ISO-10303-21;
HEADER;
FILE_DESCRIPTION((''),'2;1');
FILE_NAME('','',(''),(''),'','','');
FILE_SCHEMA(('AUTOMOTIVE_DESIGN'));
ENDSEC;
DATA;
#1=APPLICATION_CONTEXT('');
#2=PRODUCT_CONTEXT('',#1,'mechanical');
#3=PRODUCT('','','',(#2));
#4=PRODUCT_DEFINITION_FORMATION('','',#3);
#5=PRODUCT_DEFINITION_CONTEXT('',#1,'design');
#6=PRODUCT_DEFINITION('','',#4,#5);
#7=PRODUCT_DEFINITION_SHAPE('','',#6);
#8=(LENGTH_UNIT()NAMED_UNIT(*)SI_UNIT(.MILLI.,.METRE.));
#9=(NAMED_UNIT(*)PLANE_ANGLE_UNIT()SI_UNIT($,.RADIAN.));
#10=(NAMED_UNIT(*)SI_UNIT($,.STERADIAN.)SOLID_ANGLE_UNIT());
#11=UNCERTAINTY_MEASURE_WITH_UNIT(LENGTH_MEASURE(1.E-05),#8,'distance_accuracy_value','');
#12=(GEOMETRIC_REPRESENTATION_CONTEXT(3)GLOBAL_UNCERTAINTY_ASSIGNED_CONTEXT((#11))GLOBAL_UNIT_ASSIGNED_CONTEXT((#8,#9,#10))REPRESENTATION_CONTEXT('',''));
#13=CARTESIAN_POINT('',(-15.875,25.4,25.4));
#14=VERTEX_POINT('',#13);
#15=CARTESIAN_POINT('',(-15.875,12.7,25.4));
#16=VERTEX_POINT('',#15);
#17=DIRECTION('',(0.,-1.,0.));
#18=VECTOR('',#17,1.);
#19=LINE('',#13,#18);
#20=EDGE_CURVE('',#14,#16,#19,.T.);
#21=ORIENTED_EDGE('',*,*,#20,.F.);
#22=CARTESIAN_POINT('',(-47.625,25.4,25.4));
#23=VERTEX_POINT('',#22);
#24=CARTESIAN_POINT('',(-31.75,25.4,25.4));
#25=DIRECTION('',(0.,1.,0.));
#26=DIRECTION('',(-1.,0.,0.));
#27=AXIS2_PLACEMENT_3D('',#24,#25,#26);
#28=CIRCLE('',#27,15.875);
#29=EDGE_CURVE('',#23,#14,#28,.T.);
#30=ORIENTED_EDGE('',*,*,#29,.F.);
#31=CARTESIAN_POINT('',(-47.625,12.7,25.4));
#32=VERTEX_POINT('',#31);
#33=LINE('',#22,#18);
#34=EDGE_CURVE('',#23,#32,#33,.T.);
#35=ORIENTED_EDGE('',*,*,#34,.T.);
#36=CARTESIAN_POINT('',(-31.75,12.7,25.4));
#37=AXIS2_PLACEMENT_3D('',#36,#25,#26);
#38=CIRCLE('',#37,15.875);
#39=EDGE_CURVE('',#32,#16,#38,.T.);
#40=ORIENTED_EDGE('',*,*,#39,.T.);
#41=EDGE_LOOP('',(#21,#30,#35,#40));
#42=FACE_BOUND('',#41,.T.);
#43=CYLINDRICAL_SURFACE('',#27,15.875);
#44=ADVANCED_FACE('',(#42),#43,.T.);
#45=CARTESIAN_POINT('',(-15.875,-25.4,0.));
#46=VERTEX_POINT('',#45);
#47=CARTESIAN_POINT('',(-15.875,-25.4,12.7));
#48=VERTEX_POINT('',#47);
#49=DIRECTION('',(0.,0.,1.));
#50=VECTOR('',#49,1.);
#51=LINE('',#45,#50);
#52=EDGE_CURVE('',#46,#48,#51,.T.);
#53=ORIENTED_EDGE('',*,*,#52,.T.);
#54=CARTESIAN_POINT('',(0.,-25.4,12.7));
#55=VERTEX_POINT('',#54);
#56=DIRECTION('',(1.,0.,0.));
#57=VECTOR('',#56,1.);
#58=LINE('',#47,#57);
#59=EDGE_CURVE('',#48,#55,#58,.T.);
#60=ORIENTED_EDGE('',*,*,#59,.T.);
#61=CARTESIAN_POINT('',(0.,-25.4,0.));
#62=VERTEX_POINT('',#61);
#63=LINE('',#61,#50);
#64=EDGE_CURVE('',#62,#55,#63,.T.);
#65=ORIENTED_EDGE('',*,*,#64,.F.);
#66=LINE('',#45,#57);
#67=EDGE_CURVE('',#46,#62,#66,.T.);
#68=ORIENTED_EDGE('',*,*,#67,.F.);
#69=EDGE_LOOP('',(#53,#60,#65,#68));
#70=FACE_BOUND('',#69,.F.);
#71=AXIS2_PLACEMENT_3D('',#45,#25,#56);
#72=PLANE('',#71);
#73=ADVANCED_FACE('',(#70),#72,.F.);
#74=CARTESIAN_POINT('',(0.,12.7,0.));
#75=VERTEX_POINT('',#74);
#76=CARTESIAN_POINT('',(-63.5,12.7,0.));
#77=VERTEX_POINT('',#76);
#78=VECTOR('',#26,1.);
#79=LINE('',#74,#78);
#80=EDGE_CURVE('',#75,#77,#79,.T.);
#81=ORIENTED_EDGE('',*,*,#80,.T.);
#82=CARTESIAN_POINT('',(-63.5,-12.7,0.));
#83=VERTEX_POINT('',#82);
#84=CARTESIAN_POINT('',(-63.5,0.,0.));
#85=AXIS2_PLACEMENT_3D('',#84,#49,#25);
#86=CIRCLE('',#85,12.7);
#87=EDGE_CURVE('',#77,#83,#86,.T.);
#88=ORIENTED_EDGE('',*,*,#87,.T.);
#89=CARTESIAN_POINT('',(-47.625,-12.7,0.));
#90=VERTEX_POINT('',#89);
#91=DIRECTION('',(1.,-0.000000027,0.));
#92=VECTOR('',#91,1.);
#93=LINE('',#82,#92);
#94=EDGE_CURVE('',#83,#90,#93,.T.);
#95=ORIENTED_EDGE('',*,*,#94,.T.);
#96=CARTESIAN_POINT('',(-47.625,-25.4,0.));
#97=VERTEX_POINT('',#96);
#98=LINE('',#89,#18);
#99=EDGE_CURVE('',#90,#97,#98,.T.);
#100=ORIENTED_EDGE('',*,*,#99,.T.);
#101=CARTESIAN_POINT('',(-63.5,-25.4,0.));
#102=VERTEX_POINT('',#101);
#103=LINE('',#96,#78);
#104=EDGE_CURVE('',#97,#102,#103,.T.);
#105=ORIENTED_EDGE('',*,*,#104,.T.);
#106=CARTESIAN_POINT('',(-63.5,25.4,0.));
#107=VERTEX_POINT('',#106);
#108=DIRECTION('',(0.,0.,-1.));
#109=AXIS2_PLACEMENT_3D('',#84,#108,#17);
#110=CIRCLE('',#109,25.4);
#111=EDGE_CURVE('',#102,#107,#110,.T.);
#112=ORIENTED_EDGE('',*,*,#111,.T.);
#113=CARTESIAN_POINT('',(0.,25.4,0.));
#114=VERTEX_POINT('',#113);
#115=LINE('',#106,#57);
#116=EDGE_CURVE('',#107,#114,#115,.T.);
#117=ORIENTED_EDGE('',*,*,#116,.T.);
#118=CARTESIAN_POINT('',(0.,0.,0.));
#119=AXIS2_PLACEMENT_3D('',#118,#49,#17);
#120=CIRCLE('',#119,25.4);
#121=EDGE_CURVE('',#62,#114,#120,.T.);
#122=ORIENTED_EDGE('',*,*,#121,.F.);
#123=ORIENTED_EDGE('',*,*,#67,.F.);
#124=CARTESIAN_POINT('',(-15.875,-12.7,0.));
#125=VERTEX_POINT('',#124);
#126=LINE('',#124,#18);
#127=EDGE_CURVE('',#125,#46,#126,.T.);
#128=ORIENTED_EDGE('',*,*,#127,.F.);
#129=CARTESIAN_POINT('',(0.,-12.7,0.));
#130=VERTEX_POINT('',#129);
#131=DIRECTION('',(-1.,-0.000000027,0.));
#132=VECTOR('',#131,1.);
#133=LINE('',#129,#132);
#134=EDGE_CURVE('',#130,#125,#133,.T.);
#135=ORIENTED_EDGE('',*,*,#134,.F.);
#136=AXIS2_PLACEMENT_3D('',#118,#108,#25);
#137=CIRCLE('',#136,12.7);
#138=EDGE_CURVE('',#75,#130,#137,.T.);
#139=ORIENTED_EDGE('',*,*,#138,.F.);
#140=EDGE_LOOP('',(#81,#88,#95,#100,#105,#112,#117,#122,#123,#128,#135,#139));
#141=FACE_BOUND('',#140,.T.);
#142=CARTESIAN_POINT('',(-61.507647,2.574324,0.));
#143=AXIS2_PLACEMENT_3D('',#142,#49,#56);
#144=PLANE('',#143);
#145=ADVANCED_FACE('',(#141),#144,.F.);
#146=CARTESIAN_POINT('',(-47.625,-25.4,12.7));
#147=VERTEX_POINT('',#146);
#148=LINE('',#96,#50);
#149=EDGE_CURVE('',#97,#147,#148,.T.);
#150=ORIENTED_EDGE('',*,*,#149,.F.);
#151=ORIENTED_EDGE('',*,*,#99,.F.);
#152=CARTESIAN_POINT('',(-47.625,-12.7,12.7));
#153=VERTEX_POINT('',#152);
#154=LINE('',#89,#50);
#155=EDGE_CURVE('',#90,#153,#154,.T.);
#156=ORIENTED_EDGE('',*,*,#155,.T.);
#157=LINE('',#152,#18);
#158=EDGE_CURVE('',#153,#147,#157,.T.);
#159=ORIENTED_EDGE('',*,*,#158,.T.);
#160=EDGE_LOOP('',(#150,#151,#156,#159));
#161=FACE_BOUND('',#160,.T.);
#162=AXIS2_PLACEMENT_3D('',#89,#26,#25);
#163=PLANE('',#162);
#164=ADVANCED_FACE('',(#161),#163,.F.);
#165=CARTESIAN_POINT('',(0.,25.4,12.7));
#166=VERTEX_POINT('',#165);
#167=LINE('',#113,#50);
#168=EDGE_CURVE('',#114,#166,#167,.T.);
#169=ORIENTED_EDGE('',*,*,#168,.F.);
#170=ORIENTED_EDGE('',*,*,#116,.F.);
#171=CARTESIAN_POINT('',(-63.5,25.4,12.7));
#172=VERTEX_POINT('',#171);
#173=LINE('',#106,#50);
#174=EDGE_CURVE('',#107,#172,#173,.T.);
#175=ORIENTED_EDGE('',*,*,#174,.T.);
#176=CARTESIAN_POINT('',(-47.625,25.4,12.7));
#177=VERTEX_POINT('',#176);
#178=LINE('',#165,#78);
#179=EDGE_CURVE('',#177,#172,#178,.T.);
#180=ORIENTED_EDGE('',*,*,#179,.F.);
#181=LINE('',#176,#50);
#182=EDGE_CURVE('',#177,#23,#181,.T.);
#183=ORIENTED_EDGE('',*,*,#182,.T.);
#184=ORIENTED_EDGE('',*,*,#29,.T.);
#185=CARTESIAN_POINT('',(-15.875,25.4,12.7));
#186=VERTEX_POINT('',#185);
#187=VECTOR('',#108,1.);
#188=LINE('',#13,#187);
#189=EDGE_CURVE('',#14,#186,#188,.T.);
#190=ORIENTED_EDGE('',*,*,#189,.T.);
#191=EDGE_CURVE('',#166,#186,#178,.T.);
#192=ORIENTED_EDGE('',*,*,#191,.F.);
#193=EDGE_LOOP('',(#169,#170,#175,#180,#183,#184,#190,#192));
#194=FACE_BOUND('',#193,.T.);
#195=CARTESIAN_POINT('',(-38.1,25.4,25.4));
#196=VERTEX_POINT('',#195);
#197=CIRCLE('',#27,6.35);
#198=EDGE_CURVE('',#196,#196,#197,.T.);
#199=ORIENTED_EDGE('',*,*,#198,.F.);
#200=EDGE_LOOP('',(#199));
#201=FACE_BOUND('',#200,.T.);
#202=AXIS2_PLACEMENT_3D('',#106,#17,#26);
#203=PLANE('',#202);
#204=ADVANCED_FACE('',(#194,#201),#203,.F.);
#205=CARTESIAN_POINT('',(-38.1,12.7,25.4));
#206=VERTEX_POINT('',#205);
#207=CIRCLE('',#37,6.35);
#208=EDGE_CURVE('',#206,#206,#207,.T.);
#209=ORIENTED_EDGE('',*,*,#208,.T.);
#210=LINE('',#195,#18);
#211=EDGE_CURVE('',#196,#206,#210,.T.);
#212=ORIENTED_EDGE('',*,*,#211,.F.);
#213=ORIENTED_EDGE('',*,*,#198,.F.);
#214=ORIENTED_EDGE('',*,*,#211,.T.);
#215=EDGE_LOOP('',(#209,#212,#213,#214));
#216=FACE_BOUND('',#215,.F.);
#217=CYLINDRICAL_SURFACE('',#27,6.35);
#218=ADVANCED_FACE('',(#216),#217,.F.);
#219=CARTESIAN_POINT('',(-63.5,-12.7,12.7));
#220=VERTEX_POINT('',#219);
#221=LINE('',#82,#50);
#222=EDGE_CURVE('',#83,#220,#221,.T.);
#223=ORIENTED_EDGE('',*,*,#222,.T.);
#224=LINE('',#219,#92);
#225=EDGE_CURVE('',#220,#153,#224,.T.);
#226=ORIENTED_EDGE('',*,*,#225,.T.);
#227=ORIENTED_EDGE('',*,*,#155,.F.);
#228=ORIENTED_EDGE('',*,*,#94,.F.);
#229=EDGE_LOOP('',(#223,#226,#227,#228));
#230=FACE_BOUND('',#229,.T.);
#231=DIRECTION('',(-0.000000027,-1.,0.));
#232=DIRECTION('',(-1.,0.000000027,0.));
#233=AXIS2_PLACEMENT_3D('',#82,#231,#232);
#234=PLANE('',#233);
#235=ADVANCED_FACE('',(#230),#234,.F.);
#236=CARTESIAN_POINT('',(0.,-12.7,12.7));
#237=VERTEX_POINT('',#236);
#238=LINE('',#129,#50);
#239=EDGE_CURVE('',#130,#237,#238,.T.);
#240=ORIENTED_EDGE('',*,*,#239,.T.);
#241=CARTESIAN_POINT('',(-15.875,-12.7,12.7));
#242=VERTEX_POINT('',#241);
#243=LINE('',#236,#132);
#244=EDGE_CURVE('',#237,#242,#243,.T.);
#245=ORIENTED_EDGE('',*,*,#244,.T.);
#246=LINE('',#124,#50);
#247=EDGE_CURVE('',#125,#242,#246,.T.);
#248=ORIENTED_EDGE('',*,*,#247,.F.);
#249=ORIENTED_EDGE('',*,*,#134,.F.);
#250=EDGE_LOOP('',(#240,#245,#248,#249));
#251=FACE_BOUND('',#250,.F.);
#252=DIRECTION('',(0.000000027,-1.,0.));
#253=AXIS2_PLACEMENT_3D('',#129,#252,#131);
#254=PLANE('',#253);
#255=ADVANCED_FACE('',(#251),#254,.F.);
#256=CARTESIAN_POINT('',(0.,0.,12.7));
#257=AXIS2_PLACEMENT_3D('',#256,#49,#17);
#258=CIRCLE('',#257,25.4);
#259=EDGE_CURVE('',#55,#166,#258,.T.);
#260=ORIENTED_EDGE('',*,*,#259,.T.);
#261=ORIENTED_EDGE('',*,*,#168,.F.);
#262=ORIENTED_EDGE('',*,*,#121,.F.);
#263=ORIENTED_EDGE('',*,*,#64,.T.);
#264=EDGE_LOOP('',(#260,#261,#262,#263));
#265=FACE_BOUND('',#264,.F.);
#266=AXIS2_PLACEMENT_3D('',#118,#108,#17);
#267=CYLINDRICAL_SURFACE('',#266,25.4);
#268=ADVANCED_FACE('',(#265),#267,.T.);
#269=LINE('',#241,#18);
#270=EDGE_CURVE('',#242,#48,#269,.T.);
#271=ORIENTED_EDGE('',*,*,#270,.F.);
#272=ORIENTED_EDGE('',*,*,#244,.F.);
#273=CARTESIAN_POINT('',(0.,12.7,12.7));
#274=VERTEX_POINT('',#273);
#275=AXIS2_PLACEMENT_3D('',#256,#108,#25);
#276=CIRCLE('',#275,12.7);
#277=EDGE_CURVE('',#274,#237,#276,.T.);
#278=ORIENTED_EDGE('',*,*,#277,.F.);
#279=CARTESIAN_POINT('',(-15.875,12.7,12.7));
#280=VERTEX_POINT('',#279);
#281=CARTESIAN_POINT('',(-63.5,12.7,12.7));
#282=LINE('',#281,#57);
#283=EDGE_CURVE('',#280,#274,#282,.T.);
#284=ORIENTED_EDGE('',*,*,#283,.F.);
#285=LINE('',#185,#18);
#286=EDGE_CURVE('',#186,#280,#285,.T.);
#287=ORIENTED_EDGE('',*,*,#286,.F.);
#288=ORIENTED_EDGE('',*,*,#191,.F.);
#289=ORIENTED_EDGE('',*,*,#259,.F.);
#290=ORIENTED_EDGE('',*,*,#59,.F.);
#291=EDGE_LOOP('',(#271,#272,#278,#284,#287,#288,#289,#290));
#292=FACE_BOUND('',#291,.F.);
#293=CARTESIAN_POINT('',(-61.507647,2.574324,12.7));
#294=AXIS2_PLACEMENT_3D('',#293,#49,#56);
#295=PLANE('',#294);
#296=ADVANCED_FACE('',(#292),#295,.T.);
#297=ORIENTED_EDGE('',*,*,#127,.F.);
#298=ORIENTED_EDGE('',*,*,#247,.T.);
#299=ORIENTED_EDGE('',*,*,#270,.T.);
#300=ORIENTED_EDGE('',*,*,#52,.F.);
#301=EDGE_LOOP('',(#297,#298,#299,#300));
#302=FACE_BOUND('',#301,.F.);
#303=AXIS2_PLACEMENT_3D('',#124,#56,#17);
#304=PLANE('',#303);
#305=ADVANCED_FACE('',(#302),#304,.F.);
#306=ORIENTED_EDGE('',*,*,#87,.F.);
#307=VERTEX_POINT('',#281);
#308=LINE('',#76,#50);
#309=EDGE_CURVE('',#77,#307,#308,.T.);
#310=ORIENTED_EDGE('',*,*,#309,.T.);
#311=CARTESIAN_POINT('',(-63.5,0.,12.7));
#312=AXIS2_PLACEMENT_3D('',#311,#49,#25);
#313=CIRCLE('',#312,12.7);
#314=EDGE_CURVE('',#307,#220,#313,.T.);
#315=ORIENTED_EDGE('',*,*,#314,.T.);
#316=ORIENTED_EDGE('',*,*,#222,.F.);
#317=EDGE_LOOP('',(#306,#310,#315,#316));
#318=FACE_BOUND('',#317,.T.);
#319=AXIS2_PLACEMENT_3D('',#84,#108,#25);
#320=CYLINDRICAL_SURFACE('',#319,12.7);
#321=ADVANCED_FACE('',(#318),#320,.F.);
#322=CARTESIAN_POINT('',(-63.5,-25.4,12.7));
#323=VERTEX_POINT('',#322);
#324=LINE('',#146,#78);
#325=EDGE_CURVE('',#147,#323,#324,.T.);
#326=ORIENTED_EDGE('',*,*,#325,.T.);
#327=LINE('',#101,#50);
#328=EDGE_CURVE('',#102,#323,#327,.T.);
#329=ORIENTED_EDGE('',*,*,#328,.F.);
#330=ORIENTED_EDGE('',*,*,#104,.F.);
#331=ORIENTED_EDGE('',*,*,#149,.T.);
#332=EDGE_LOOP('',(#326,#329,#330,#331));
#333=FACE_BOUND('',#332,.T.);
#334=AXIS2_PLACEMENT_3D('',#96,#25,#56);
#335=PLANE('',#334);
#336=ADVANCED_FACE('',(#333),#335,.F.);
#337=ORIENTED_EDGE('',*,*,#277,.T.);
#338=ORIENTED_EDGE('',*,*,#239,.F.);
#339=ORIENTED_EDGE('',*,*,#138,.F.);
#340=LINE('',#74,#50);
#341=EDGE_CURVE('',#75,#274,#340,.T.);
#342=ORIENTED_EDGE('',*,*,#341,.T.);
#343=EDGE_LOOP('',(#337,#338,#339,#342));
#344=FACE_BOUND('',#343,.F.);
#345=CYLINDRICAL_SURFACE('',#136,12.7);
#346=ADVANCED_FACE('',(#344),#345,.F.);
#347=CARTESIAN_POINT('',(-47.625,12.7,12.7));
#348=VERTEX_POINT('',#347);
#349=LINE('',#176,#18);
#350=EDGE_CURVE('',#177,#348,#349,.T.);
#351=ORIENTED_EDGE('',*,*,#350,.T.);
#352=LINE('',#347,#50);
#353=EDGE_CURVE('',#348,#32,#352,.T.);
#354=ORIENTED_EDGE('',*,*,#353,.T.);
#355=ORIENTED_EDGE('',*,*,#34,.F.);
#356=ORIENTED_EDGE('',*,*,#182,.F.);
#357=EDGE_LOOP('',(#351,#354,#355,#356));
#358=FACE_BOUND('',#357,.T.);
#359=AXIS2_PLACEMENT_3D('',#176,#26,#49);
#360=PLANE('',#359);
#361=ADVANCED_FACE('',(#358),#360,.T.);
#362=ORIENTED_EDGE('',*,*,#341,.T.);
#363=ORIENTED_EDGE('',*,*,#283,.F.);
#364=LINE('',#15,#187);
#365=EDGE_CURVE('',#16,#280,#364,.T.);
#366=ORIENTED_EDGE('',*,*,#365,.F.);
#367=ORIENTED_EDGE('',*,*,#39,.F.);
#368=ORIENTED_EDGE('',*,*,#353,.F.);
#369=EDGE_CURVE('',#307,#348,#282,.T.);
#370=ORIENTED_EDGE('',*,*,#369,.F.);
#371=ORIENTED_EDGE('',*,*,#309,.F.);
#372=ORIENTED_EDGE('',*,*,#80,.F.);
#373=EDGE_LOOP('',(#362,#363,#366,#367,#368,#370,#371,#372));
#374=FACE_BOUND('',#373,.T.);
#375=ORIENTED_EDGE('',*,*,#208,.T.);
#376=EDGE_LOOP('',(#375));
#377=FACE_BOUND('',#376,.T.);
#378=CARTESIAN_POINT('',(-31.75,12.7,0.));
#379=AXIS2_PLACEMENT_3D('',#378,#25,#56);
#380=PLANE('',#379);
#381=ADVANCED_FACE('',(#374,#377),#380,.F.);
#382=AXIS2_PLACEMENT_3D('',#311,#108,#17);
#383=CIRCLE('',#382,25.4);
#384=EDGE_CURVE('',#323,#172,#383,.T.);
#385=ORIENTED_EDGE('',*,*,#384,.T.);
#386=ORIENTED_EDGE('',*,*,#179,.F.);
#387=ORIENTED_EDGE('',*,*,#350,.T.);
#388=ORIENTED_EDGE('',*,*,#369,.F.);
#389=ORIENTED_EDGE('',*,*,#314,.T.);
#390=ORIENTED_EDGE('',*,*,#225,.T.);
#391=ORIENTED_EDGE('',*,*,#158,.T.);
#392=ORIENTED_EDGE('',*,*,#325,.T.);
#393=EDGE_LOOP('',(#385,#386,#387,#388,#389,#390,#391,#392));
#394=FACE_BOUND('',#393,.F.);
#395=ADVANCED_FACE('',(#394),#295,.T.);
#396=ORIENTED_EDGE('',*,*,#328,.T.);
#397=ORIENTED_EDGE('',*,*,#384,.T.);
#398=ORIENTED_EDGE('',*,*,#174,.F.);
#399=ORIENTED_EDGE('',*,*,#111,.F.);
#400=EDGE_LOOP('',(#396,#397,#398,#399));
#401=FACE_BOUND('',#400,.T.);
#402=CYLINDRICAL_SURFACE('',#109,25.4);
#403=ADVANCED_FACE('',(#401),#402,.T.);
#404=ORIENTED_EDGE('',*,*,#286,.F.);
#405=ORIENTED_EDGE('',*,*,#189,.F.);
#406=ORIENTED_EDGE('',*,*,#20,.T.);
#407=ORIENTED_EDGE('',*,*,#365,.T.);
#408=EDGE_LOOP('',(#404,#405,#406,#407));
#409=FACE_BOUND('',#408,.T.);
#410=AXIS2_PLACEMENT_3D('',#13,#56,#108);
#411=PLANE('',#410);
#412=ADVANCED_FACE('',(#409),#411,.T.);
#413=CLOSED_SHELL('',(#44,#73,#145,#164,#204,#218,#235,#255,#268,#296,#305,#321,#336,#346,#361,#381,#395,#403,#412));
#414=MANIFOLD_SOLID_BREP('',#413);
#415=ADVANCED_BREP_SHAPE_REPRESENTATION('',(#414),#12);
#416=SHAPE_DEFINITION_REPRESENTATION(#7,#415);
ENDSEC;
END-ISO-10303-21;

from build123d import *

# Parameters (mm, degrees)
F1_DEPTH = 12.7
F3_R     = 6.35
F4_DEPTH = 12.7


# Not quite as in the source:
# - a feature names something its author has since deleted; it is built from what else it names


with BuildPart() as f1:
    # F0 (on Top) → F1 (new body)
    with BuildSketch(Plane.XY):
        with BuildLine():
            Line((-15.875, -25.4), (0, -25.4))
            ThreePointArc((0, -25.4), (25.4, 0), (0, 25.4))
            Line((0, 25.4), (-31.75, 25.4))
            Line((-31.75, 25.4), (-31.75, 12.7))
            Line((-31.75, 12.7), (0, 12.7))
            ThreePointArc((0, 12.7), (12.7, 0), (0, -12.7))
            Line((0, -12.7), (-15.875, -12.70000043))
            Line((-15.875, -12.70000043), (-15.875, -25.4))
        make_face()
    extrude(amount=F1_DEPTH)

    # F2: F1 across face


with BuildPart() as f1_1:
    add(f1.part)
    add(f1.part.mirror(Plane(origin=(-31.75, 19.05, 6.35), x_dir=(0, -1, 0), z_dir=(-1, 0, 0))))

    # F3 (on face) → F4 (join, through all)
    with BuildSketch(Plane(origin=(0, 25.4, 0), x_dir=(-1, 0, 0), z_dir=(0, 1, 0))):
        with BuildLine():
            Line((47.625, 12.7), (47.625, 25.4))
            ThreePointArc((47.625, 25.4), (31.75, 41.275), (15.875, 25.4))
            Line((15.875, 25.4), (15.875, 12.7))
            Line((15.875, 12.7), (47.625, 12.7))
        make_face()
        with Locations((31.75, 25.4)):
            Circle(F3_R, mode=Mode.SUBTRACT)
    extrude(amount=-F4_DEPTH)


solid = f1_1.part
